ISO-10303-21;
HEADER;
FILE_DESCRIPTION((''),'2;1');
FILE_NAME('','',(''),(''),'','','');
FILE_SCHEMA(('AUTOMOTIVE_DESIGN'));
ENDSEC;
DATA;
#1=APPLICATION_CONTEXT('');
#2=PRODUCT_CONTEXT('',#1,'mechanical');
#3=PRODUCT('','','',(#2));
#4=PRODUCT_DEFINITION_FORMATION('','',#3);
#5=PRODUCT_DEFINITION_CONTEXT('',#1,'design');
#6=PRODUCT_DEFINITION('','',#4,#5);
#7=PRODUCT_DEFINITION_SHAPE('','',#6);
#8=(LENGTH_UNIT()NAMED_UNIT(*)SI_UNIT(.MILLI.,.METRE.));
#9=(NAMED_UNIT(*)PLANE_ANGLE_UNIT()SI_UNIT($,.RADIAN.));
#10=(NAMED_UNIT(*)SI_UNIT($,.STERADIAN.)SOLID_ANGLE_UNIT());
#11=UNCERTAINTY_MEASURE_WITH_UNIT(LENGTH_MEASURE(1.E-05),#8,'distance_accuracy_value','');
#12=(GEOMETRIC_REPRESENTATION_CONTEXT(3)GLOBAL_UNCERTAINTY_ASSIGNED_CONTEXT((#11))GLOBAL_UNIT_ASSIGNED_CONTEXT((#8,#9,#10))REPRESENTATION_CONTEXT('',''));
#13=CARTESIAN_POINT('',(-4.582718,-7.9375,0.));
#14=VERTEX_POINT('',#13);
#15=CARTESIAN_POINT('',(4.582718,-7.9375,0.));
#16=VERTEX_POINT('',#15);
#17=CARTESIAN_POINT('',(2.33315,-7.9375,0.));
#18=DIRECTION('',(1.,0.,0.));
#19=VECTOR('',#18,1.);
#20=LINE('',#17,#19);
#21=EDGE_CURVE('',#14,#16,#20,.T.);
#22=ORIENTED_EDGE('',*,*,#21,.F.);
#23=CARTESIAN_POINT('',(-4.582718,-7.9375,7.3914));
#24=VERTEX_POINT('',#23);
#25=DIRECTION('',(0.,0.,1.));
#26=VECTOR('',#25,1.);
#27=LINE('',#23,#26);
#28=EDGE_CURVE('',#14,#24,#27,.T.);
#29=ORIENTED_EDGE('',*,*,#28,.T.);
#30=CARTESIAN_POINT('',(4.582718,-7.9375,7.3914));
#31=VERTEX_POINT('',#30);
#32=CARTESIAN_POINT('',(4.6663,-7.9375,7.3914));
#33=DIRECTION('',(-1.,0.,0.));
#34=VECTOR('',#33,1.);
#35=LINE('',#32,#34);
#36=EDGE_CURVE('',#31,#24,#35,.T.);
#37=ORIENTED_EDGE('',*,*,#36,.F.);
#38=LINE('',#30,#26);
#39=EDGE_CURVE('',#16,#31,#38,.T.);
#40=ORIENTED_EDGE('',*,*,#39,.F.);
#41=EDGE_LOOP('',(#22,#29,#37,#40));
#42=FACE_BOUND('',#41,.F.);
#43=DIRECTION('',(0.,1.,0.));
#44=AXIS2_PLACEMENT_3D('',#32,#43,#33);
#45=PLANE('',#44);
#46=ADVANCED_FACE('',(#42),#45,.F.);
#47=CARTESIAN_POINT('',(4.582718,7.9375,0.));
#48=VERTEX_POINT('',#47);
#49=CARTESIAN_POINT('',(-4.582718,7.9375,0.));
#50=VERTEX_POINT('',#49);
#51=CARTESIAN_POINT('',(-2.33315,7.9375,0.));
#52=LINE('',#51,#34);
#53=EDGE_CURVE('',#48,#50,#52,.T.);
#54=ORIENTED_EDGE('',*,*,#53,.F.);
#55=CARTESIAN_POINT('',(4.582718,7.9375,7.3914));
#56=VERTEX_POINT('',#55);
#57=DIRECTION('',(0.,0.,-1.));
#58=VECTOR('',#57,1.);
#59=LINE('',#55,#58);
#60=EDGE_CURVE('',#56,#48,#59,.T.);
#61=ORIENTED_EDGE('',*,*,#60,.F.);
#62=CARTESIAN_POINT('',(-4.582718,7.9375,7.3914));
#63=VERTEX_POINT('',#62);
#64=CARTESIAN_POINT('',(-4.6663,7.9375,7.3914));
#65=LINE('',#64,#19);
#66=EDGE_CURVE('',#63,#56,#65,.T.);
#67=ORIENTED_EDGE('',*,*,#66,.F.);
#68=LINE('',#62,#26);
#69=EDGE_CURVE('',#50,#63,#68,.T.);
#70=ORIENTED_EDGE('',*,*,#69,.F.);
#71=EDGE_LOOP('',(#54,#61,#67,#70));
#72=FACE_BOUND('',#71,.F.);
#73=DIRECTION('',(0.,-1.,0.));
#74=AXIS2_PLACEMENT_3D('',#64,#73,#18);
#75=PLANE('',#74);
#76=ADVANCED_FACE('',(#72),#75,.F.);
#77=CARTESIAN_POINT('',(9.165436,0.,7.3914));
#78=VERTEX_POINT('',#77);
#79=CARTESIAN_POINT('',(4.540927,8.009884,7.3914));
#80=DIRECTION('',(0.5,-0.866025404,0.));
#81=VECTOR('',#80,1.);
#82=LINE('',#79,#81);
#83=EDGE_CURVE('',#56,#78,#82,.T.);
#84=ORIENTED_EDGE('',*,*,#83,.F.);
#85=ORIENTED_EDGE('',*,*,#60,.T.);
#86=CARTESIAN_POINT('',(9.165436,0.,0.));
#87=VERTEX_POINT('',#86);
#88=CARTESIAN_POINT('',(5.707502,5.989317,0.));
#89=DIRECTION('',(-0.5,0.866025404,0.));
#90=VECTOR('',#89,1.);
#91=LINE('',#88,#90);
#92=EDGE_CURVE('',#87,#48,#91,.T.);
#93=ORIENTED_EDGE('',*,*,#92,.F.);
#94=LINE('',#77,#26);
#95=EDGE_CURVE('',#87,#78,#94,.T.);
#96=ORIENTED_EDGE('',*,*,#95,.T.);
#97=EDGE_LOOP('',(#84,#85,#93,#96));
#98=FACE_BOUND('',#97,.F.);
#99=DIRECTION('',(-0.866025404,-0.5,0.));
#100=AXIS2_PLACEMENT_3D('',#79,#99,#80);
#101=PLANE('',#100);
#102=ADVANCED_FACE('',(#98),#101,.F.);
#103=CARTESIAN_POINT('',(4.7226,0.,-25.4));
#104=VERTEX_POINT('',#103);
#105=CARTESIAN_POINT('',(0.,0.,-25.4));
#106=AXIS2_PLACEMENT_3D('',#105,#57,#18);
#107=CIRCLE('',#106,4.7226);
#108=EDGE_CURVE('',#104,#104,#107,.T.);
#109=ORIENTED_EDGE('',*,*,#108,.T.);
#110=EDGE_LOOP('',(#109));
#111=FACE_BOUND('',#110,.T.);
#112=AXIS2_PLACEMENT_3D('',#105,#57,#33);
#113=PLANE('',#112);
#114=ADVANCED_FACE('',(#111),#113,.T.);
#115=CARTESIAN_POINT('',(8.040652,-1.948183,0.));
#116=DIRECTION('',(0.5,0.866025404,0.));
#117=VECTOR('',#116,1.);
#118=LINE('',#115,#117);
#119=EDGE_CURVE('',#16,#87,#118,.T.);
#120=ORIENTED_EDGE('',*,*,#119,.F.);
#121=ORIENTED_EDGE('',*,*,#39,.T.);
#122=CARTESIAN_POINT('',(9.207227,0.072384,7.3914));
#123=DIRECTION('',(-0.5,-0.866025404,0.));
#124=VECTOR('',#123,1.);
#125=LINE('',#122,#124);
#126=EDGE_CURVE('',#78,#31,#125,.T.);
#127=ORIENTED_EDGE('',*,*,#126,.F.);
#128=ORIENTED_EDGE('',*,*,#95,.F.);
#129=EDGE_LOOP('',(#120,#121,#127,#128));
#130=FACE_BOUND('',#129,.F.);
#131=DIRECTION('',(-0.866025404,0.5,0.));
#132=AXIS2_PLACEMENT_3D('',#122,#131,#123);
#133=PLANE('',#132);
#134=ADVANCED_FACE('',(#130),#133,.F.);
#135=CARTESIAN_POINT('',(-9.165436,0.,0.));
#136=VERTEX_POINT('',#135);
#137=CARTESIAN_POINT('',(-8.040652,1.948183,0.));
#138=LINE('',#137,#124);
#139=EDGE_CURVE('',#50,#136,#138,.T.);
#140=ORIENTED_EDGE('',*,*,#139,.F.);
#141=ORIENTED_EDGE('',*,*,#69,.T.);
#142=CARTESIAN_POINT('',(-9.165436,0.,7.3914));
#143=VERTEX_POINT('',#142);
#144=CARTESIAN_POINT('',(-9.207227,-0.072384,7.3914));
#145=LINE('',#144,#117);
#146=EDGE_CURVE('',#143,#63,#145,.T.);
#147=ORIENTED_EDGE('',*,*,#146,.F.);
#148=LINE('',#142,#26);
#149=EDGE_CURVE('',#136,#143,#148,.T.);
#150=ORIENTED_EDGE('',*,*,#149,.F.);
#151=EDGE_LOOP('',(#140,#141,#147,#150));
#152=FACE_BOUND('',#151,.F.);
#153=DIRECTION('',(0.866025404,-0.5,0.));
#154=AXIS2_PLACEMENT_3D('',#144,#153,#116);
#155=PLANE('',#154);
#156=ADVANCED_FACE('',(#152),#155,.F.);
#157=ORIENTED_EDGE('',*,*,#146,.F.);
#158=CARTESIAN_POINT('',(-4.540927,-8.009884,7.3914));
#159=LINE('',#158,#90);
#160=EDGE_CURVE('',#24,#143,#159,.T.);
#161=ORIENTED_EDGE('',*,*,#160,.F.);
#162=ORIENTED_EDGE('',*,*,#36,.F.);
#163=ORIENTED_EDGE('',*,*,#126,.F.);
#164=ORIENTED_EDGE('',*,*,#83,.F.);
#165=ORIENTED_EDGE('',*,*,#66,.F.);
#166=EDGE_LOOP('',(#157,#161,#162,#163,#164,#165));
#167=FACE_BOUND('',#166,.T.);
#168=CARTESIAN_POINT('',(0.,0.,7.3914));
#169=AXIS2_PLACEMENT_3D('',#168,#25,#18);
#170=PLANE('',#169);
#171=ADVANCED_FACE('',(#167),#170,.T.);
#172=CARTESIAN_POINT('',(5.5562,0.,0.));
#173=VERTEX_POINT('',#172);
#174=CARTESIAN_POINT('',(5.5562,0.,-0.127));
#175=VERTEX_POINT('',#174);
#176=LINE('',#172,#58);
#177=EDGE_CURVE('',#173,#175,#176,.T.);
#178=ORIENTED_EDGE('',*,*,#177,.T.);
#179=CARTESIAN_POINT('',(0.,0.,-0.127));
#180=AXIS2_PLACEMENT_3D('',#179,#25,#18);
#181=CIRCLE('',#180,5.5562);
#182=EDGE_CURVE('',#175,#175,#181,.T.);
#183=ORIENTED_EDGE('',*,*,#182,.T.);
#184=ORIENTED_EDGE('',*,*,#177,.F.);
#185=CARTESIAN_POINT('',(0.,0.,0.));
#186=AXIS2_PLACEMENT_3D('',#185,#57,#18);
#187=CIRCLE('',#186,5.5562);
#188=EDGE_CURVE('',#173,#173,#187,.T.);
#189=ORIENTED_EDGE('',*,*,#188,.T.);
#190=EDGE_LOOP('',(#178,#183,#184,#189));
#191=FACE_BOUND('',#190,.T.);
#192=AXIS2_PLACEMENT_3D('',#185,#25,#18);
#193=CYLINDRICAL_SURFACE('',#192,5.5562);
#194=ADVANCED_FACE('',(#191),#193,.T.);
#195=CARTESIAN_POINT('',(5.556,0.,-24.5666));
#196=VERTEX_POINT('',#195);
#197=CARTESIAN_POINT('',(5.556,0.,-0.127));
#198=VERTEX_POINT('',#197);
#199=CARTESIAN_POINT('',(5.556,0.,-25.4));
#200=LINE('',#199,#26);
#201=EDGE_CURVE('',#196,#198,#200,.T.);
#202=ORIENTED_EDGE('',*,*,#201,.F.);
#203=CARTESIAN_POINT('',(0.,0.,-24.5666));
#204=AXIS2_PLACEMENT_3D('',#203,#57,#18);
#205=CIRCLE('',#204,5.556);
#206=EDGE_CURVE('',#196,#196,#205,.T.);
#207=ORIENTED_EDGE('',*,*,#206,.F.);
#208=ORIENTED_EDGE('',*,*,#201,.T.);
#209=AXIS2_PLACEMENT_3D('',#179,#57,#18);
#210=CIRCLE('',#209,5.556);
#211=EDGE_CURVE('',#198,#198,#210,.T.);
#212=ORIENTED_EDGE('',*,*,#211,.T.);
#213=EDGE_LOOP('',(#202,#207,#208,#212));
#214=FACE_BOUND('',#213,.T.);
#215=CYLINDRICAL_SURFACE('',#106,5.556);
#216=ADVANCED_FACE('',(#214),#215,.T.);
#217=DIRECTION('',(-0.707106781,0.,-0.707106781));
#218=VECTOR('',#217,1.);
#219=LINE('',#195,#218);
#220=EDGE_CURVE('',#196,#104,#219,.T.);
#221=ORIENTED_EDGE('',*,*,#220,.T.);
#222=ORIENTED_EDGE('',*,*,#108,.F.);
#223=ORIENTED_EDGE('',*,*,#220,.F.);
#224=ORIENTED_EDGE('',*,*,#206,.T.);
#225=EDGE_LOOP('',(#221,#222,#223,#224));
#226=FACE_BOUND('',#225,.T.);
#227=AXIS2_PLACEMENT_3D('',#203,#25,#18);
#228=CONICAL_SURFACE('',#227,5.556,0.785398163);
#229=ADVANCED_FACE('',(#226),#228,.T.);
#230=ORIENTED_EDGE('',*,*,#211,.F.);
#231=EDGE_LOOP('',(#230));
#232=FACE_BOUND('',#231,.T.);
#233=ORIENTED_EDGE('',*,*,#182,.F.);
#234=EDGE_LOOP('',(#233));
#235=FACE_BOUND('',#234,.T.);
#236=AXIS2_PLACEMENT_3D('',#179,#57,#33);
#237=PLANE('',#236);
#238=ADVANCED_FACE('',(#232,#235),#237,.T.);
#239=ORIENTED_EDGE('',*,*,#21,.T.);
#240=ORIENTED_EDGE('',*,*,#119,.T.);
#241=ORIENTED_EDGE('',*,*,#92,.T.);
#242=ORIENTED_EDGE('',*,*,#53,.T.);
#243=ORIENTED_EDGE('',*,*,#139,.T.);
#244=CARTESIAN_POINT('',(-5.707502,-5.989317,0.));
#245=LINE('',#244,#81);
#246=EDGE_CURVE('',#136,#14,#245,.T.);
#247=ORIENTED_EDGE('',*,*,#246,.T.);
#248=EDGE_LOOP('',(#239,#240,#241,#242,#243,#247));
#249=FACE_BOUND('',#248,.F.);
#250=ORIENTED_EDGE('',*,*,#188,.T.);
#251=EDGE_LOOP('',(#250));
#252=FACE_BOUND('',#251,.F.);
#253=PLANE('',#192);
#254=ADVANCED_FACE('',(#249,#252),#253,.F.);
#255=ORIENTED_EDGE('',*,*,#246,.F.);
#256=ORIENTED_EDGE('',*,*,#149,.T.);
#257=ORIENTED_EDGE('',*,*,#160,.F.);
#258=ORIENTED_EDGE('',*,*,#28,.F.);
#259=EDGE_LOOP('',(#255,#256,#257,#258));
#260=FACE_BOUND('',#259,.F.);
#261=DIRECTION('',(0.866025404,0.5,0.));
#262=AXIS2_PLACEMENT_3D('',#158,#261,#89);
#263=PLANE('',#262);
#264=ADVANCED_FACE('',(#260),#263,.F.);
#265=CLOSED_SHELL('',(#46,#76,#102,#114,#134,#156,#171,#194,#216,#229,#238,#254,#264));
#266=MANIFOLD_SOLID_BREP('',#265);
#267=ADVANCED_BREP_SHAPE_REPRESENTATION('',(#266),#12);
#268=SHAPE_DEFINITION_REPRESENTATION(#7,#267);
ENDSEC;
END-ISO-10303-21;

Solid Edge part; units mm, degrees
sketch "Sketch1" plane through (0, 0, 0) normal (0, 0, 1) x (1, 0, 0)
  circle A0 centre (0, 0) radius 9.2075
  dimension "D1" = 18.415
extrude "Protrusion1" add sketch "Sketch1" along normal blind 7.3914
sketch "Sketch2" plane through (0, 0, 0) normal (0, 0, -1) x (1, 0, 0)
  circle A0 centre (0, 0) radius 5.5562
extrude "Protrusion2" add sketch "Sketch2" along normal blind 25.4
sketch "Sketch3" plane through (0, 0, -25.4) normal (0, 0, -1) x (1, 0, 0)
  circle A0 centre (0, 0) radius 5.556
extrude "Cutout1" cut sketch "Sketch3" against normal blind 25.273 flip side to cut
chamfer "Chamfer_1" distance 0.8334 angle 45 1 edges at (-5.556, 0, -25.4)
sketch "Sketch4" plane through (0, 0, 7.3914) normal (0, 0, 1) x (1, 0, 0)
  line L0 (-4.6663, 7.9375) -> (4.6663, 7.9375)
  dimension "D1" = 15.875
extrude "Cutout2" cut sketch "Sketch4" against normal up to next material side at (0, 7.9875, 7.3914)
pattern_circular "Pattern1" count 6 over 360 about axis through (0, 0, 7.3914) along (0, 0, 1) of "Cutout2"
properties part number "24100022"
